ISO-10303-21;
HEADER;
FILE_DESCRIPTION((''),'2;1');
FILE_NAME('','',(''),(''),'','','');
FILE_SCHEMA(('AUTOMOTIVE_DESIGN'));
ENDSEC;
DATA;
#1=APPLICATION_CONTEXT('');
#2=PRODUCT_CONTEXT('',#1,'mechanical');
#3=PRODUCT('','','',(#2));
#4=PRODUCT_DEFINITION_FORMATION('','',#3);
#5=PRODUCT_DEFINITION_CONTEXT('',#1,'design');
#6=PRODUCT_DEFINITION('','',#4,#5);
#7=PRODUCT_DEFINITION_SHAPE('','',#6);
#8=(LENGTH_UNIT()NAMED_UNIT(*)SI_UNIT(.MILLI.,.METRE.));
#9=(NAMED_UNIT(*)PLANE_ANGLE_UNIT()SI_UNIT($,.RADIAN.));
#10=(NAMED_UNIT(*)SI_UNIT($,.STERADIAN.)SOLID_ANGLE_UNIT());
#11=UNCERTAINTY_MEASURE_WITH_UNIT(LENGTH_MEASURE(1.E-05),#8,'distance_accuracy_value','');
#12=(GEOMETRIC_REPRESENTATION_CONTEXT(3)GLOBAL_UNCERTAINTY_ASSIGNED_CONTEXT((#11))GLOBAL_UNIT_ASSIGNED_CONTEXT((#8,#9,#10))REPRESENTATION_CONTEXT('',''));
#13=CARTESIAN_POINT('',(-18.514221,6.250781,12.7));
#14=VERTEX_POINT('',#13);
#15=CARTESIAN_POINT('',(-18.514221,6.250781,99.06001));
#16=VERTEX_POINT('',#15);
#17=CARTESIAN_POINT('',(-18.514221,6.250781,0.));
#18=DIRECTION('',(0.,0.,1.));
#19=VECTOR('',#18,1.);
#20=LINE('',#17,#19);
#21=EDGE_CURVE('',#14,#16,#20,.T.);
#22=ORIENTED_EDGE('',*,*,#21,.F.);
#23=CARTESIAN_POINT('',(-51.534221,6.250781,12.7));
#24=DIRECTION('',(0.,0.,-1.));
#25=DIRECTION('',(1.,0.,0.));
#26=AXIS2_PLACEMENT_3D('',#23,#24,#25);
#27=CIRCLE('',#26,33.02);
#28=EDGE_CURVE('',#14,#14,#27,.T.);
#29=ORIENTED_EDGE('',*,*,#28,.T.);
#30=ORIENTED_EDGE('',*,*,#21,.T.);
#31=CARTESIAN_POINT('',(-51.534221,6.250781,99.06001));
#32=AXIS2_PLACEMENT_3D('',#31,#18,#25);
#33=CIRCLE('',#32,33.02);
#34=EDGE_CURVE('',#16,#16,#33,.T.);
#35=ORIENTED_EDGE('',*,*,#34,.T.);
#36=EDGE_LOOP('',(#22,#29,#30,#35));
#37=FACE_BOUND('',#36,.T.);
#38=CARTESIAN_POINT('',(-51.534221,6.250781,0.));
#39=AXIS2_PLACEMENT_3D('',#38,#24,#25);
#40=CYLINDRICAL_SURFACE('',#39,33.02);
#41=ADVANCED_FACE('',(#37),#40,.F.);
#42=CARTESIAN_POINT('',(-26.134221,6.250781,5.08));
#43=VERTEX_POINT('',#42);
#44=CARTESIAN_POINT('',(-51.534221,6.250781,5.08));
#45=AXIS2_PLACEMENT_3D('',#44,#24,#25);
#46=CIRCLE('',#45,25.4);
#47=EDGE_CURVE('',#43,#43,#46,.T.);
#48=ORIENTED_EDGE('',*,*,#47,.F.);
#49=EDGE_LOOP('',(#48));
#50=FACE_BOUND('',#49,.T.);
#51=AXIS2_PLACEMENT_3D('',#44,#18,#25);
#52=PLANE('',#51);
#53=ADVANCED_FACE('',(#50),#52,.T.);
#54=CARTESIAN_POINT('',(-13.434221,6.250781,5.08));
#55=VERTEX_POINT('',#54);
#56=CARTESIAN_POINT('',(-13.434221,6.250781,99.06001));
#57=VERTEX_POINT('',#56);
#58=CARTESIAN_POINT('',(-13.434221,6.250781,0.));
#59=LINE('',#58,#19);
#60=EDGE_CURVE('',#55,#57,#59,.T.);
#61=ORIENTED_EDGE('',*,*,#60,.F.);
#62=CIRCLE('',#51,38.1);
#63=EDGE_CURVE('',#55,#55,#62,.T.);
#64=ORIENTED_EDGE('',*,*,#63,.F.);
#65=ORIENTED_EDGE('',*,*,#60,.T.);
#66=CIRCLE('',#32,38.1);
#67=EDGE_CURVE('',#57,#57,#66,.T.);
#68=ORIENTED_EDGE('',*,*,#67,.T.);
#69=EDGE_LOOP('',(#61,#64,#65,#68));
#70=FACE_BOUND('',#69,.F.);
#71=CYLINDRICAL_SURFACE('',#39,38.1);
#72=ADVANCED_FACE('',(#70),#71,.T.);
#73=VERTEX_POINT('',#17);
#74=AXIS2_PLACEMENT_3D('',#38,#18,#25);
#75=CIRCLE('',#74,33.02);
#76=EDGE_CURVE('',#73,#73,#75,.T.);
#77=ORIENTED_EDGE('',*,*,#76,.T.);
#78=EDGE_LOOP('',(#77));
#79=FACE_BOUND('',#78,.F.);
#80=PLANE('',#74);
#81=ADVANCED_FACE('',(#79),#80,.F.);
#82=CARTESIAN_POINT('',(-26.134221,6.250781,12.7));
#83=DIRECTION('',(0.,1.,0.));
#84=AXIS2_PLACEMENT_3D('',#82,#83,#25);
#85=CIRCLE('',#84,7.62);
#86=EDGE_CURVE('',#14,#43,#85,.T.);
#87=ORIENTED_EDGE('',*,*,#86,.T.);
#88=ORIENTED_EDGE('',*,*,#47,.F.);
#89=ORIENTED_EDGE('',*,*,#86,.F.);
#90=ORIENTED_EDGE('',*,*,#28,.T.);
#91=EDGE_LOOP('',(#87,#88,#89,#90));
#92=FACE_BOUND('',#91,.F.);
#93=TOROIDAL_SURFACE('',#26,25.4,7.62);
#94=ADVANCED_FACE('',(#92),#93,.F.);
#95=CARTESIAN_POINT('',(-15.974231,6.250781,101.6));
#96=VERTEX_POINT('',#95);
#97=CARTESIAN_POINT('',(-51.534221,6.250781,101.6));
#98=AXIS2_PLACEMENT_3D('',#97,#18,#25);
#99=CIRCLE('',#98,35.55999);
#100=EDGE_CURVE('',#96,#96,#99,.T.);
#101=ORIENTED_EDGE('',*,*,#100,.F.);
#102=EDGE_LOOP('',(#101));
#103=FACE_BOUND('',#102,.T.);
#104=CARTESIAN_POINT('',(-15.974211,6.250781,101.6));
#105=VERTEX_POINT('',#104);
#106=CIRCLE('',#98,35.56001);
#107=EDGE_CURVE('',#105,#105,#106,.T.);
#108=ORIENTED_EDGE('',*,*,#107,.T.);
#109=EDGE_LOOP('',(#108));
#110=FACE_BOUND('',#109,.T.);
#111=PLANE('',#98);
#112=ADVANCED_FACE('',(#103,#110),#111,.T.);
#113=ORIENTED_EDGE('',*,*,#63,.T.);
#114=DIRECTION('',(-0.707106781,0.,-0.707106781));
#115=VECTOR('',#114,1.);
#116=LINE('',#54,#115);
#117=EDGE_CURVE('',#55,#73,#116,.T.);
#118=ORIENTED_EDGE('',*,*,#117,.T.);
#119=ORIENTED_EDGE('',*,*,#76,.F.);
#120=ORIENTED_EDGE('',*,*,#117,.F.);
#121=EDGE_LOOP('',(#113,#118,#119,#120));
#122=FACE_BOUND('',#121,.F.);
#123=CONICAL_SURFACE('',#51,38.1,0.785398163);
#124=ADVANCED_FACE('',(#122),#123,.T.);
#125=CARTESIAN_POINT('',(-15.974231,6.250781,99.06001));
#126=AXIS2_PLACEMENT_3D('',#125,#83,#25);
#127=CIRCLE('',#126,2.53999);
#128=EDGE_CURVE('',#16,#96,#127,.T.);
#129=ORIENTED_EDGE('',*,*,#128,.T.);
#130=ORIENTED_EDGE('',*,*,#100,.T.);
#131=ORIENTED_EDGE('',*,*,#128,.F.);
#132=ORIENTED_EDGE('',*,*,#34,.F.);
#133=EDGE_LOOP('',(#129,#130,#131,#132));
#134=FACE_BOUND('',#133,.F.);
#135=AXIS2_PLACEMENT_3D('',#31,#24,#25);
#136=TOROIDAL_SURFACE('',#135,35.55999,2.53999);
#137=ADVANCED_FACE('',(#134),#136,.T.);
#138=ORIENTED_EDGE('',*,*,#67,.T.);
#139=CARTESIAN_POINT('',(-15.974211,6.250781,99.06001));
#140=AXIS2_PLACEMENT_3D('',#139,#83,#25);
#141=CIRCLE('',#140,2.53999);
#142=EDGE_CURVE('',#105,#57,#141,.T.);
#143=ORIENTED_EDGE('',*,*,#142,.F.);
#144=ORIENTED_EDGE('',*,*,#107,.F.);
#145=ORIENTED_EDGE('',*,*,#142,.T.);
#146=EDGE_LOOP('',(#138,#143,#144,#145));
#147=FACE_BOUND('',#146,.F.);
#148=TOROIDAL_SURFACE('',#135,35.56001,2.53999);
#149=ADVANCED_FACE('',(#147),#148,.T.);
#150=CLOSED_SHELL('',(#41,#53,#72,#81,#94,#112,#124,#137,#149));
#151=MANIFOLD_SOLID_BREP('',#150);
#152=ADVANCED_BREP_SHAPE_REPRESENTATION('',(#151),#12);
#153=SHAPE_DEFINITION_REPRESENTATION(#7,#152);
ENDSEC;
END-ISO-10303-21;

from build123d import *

# Parameters (mm, degrees)
F0_R     = 38.1
F1_DEPTH = 101.6
F2_T     = -5.08
F3_R     = 7.62
F4_R     = 2.53999
F5_SIZE  = 5.08


# Not quite as in the source:
# - a fillet or chamfer is up to 0.001 mm smaller than in the source, because OpenCascade refuses the exact size


with BuildPart() as f1:
    # F0 (on Top) → F1 (new body)
    with BuildSketch(Plane.XY):
        with Locations((-51.5342205763, 6.2507814728)):
            Circle(F0_R)
    extrude(amount=F1_DEPTH)

    # F2
    f2_openings = [f1.faces().sort_by_distance(p)[0] for p in [
        (-51.534221, 6.250781, 101.6),
    ]]
    offset(amount=F2_T, openings=f2_openings)

    # F3
    f3_edges = [f1.edges().sort_by_distance(p)[0] for p in [
        (-84.554221, 6.250781, 5.08),
    ]]
    fillet(f3_edges, radius=F3_R)

    # F4 (radius 2.54 in the source; OpenCascade refuses exactly that, so slightly less here)
    f4_edges = [f1.edges().sort_by_distance(p)[0] for p in [
        (-84.554221, 6.250781, 101.6),
        (-89.634221, 6.250781, 101.6),
    ]]
    fillet(f4_edges, radius=F4_R)

    # F5
    f5_edges = [f1.edges().sort_by_distance(p)[0] for p in [
        (-89.634221, 6.250781, 0),
    ]]
    chamfer(f5_edges, length=F5_SIZE)


solid = f1.part
